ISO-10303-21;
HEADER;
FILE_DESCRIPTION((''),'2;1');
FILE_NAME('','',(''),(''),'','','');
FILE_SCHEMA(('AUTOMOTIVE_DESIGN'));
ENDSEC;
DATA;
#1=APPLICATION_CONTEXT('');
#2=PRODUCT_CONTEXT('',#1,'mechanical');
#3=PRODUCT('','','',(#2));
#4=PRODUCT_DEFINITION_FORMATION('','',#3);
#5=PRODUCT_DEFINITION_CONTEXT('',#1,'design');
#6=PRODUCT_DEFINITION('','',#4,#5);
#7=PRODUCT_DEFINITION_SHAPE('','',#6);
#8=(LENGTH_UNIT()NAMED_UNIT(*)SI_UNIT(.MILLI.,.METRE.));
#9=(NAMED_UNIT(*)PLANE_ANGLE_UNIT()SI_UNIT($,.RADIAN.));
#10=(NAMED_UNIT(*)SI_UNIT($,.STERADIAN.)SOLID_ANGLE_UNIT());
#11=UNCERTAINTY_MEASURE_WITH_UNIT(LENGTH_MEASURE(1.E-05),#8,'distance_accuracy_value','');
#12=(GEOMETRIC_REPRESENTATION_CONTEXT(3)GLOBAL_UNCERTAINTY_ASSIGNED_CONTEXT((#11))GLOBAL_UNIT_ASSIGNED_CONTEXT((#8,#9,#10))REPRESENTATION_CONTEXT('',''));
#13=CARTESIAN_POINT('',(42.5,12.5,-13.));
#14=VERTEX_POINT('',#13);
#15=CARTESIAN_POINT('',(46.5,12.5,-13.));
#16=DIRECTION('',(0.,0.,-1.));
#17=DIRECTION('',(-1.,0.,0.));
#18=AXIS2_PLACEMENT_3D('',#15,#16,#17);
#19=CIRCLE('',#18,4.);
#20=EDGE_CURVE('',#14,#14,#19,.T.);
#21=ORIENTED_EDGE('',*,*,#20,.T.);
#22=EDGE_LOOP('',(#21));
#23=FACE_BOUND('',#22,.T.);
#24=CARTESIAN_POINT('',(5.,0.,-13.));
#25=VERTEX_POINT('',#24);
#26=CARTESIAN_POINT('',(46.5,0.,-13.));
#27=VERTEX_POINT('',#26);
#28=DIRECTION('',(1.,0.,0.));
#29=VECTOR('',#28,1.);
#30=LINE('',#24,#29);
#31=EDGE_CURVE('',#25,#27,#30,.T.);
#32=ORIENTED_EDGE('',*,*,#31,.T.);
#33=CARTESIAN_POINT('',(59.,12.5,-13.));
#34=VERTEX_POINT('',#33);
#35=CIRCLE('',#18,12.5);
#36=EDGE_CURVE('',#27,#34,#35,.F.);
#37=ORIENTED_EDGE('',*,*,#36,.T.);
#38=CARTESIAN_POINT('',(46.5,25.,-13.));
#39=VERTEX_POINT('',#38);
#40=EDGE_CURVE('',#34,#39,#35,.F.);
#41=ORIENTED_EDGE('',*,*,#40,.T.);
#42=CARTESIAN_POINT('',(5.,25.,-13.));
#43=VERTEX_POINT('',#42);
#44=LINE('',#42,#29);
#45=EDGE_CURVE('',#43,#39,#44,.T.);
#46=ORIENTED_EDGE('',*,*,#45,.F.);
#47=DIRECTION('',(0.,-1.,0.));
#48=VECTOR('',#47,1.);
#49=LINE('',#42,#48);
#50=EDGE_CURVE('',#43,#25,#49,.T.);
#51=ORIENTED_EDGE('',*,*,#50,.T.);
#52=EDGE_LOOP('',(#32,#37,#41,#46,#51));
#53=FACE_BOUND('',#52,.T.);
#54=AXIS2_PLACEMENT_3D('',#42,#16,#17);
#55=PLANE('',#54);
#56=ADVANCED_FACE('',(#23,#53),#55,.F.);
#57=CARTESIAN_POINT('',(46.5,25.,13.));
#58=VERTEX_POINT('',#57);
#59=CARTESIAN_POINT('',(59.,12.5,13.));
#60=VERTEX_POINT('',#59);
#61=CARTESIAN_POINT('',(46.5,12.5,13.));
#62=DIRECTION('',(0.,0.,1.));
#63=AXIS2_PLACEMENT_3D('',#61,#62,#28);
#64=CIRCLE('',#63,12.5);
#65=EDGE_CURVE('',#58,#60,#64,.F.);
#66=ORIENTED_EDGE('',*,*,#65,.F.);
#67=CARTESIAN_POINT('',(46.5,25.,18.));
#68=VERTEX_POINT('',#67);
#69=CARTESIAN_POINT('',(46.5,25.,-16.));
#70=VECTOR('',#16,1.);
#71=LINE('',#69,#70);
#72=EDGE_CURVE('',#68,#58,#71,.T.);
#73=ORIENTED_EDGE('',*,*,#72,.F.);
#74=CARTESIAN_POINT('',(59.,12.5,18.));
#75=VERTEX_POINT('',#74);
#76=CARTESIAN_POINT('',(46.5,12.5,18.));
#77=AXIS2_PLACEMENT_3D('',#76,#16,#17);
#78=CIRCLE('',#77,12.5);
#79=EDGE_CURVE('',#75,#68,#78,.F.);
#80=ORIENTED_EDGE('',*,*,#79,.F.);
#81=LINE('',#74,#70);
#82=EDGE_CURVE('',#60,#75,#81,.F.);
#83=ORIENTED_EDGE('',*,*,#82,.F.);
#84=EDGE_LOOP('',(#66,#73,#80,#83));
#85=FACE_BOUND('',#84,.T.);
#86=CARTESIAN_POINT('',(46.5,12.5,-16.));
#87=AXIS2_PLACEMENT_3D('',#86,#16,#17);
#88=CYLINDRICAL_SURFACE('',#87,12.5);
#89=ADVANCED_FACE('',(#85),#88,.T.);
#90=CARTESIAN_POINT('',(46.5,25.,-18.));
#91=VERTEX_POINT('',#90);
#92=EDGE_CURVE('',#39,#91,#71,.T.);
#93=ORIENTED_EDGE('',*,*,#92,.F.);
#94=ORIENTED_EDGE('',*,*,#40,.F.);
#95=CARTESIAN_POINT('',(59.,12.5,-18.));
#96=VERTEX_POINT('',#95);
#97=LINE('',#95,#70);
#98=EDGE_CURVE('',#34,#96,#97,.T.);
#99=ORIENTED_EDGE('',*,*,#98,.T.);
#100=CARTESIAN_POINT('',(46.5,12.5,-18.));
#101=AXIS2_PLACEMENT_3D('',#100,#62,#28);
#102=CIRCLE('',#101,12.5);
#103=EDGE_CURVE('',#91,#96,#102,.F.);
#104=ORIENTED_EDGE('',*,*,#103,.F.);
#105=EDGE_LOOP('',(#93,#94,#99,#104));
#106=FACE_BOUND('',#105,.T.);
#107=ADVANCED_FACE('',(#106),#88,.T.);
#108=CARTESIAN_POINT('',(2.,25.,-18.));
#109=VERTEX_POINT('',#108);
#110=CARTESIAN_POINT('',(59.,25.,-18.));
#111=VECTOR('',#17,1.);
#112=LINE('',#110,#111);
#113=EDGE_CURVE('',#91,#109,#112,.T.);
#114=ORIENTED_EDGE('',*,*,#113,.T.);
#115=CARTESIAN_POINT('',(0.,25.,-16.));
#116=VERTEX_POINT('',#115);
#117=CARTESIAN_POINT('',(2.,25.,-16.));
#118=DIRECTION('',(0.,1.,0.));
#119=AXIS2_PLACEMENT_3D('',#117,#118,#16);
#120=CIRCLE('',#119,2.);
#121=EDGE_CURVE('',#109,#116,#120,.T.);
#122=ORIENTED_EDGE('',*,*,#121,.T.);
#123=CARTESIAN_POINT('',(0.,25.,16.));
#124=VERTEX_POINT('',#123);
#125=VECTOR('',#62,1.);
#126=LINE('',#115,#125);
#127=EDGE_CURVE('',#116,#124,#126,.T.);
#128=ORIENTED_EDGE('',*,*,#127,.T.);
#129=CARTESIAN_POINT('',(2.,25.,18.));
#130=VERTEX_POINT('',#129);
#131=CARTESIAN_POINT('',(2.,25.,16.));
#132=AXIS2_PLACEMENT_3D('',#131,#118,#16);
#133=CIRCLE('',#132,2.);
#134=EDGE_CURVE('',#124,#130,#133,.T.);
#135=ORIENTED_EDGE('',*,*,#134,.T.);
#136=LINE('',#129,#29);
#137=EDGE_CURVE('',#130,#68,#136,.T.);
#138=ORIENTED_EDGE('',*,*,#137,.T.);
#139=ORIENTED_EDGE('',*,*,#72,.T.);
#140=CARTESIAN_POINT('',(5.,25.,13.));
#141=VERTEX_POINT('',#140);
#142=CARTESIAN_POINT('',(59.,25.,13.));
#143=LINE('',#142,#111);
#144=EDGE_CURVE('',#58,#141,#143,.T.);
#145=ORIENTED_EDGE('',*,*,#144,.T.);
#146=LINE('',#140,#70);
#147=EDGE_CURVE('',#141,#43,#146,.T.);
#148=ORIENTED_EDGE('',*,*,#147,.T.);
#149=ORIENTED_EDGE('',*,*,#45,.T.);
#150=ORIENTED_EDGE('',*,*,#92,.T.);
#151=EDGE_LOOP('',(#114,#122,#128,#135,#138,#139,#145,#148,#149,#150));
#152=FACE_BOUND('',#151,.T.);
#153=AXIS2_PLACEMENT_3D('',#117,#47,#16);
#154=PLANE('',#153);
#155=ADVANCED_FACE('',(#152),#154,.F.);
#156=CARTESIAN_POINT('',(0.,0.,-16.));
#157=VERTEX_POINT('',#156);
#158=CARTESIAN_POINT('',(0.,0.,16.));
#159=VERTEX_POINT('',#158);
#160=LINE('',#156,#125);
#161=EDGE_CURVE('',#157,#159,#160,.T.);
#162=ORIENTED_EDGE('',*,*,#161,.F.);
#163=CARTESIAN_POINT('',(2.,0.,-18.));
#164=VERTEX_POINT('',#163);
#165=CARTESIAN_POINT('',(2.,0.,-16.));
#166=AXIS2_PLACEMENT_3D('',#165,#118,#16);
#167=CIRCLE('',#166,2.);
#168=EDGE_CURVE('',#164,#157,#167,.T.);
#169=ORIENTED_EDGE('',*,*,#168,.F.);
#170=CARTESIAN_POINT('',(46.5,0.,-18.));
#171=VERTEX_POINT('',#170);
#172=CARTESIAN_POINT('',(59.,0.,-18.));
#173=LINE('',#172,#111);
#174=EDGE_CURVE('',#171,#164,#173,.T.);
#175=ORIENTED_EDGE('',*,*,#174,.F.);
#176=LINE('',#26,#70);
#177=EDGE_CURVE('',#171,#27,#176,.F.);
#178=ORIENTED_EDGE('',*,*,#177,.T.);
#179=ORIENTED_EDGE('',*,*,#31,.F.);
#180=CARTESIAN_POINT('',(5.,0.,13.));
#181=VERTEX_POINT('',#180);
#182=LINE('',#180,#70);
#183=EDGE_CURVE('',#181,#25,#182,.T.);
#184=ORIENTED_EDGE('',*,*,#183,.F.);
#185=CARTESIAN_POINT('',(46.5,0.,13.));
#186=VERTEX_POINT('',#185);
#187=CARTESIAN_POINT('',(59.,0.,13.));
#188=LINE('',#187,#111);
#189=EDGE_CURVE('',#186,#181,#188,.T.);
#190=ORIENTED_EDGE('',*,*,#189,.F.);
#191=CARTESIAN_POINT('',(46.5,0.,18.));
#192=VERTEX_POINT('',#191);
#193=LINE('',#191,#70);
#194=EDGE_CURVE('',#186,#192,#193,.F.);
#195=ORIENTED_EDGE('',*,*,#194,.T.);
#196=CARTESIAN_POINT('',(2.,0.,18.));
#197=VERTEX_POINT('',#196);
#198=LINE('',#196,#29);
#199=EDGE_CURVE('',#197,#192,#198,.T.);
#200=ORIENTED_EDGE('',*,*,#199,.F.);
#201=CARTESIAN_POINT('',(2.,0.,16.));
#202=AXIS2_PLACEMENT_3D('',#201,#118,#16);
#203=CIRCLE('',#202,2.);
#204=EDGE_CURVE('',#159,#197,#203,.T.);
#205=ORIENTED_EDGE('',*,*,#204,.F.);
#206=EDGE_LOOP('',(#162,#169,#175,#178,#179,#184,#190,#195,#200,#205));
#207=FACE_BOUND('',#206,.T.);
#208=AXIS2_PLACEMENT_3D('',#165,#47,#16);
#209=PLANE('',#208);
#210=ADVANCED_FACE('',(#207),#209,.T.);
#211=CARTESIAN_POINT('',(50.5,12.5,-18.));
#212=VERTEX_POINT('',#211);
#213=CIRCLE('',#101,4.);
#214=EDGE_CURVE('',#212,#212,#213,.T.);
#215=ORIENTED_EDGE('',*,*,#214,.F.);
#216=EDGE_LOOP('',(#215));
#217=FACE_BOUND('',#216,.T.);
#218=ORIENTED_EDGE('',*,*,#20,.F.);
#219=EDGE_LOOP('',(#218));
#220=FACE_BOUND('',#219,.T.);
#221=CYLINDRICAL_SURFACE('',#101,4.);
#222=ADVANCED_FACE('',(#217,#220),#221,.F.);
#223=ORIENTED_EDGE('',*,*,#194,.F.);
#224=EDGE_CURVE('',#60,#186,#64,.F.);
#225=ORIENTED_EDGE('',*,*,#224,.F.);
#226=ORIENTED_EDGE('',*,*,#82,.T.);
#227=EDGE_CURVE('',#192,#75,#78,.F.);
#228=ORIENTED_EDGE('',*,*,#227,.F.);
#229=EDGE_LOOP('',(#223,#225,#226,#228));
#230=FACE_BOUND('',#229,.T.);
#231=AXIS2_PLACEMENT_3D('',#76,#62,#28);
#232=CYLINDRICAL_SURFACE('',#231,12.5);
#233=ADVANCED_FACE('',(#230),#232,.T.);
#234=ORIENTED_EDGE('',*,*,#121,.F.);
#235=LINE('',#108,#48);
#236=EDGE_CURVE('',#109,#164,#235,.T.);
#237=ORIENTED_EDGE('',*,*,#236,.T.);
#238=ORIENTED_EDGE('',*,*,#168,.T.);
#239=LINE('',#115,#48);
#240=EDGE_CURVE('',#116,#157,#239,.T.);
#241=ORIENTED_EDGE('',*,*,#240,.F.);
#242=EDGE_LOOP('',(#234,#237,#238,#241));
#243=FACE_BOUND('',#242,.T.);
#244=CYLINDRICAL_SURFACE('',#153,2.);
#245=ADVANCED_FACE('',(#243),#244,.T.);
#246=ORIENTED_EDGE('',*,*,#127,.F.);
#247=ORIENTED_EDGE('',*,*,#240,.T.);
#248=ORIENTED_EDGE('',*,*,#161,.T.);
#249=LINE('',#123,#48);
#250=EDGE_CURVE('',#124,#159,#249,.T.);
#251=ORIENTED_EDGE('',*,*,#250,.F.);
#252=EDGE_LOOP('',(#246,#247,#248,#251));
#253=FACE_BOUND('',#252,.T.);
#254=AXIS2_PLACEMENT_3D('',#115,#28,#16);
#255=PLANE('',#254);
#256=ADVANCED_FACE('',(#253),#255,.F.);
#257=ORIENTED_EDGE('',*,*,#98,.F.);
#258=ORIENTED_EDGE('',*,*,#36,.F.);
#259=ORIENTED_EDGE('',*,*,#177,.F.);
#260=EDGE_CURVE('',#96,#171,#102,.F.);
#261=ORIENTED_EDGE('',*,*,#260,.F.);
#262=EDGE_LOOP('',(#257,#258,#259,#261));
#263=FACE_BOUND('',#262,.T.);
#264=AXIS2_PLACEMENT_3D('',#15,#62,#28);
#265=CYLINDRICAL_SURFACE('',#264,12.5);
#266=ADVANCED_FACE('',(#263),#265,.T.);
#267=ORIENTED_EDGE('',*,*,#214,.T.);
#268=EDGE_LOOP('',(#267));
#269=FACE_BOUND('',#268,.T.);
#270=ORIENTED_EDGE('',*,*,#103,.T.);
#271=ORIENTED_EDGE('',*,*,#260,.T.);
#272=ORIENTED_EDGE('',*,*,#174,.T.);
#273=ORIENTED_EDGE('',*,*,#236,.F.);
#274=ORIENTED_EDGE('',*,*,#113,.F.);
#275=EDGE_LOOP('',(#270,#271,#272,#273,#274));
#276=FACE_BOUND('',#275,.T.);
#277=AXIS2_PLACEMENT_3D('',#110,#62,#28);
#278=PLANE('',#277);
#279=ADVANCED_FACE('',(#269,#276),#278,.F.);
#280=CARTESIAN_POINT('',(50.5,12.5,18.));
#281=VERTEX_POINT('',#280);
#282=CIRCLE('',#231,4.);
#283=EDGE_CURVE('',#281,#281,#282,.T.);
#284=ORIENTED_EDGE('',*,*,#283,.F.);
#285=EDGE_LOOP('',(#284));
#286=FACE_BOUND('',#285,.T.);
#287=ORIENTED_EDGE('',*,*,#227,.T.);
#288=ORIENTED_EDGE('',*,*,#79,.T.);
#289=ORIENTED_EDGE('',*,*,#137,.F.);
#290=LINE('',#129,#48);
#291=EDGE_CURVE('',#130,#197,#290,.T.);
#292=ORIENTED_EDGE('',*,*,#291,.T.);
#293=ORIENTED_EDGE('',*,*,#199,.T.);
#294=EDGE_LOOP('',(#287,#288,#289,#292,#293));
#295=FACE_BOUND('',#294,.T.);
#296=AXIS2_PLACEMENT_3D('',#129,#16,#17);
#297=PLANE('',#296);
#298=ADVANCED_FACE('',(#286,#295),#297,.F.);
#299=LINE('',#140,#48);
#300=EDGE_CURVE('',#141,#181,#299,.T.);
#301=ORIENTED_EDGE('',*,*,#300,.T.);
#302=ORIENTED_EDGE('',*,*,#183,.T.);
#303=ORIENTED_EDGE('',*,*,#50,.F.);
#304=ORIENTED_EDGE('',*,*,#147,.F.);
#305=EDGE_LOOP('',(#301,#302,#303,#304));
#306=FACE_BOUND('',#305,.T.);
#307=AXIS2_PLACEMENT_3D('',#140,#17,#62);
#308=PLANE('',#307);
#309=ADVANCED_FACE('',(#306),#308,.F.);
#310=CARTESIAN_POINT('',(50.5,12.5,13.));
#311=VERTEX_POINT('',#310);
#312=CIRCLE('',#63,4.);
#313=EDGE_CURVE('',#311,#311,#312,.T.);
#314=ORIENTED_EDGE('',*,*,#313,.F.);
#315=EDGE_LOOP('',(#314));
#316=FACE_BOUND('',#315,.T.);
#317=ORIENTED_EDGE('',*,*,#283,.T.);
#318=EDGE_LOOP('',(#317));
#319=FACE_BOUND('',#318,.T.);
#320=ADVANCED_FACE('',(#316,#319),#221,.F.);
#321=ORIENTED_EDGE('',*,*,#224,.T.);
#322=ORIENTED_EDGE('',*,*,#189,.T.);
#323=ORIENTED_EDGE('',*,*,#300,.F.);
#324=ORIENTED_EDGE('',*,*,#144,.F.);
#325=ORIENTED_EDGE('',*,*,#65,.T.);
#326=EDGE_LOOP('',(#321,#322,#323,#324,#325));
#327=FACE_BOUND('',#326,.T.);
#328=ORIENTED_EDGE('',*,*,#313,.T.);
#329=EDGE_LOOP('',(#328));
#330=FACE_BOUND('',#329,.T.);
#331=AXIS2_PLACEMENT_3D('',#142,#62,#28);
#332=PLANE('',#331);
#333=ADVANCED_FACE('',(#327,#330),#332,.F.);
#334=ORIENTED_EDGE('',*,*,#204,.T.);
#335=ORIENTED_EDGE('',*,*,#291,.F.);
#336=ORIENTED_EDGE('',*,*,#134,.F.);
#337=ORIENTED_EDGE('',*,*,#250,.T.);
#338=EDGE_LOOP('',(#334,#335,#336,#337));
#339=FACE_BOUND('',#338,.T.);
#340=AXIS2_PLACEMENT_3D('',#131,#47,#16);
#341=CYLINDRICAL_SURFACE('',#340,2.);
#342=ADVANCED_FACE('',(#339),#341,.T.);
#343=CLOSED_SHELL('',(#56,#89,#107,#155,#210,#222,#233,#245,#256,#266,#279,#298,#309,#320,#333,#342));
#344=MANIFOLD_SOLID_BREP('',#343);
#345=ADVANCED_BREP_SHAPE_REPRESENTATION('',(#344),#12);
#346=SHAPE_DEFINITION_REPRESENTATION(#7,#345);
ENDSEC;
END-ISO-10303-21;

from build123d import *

# Parameters (mm, degrees)
EXTRUDE_1_DEPTH     = 25
FILLET_1_R          = 12.5
SKETCH_2_R          = 4
CUT_EXTRUDE_1_DEPTH = 74.4982993


with BuildPart() as part:
    # Эскиз1 → Бобышка-Вытянуть1 (new body)
    with BuildSketch(Plane(origin=(0, 0, 0), x_dir=(1, 0, 0), z_dir=(0, 1, 0))):
        with BuildLine():
            Line((0, 16), (0, -16))
            ThreePointArc((0, -16), (0.585786438, -17.414213562), (2, -18))
            Line((2, -18), (59, -18))
            Line((59, -18), (59, -13))
            Line((59, -13), (5, -13))
            Line((5, -13), (5, 13))
            Line((5, 13), (59, 13))
            Line((59, 13), (59, 18))
            Line((59, 18), (2, 18))
            ThreePointArc((2, 18), (0.585786438, 17.414213562), (0, 16))
        make_face()
    extrude(amount=EXTRUDE_1_DEPTH)

    # Скругление1
    fillet_1_edges = [part.edges().sort_by_distance(p)[0] for p in [
        (59, 25, -15.5),
        (59, 0, -15.5),
        (59, 0, 15.5),
        (59, 25, 15.5),
    ]]
    fillet(fillet_1_edges, radius=FILLET_1_R - 0.0001)  # a hair under: the kernel refuses the full size

    # Эскиз2 → Вырез-Вытянуть1 (cut, through all)
    with BuildSketch(Plane.XY.offset(18)):
        with Locations((46.5, 12.5)):
            Circle(SKETCH_2_R)
    extrude(amount=-CUT_EXTRUDE_1_DEPTH, mode=Mode.SUBTRACT)


solid = part.part
